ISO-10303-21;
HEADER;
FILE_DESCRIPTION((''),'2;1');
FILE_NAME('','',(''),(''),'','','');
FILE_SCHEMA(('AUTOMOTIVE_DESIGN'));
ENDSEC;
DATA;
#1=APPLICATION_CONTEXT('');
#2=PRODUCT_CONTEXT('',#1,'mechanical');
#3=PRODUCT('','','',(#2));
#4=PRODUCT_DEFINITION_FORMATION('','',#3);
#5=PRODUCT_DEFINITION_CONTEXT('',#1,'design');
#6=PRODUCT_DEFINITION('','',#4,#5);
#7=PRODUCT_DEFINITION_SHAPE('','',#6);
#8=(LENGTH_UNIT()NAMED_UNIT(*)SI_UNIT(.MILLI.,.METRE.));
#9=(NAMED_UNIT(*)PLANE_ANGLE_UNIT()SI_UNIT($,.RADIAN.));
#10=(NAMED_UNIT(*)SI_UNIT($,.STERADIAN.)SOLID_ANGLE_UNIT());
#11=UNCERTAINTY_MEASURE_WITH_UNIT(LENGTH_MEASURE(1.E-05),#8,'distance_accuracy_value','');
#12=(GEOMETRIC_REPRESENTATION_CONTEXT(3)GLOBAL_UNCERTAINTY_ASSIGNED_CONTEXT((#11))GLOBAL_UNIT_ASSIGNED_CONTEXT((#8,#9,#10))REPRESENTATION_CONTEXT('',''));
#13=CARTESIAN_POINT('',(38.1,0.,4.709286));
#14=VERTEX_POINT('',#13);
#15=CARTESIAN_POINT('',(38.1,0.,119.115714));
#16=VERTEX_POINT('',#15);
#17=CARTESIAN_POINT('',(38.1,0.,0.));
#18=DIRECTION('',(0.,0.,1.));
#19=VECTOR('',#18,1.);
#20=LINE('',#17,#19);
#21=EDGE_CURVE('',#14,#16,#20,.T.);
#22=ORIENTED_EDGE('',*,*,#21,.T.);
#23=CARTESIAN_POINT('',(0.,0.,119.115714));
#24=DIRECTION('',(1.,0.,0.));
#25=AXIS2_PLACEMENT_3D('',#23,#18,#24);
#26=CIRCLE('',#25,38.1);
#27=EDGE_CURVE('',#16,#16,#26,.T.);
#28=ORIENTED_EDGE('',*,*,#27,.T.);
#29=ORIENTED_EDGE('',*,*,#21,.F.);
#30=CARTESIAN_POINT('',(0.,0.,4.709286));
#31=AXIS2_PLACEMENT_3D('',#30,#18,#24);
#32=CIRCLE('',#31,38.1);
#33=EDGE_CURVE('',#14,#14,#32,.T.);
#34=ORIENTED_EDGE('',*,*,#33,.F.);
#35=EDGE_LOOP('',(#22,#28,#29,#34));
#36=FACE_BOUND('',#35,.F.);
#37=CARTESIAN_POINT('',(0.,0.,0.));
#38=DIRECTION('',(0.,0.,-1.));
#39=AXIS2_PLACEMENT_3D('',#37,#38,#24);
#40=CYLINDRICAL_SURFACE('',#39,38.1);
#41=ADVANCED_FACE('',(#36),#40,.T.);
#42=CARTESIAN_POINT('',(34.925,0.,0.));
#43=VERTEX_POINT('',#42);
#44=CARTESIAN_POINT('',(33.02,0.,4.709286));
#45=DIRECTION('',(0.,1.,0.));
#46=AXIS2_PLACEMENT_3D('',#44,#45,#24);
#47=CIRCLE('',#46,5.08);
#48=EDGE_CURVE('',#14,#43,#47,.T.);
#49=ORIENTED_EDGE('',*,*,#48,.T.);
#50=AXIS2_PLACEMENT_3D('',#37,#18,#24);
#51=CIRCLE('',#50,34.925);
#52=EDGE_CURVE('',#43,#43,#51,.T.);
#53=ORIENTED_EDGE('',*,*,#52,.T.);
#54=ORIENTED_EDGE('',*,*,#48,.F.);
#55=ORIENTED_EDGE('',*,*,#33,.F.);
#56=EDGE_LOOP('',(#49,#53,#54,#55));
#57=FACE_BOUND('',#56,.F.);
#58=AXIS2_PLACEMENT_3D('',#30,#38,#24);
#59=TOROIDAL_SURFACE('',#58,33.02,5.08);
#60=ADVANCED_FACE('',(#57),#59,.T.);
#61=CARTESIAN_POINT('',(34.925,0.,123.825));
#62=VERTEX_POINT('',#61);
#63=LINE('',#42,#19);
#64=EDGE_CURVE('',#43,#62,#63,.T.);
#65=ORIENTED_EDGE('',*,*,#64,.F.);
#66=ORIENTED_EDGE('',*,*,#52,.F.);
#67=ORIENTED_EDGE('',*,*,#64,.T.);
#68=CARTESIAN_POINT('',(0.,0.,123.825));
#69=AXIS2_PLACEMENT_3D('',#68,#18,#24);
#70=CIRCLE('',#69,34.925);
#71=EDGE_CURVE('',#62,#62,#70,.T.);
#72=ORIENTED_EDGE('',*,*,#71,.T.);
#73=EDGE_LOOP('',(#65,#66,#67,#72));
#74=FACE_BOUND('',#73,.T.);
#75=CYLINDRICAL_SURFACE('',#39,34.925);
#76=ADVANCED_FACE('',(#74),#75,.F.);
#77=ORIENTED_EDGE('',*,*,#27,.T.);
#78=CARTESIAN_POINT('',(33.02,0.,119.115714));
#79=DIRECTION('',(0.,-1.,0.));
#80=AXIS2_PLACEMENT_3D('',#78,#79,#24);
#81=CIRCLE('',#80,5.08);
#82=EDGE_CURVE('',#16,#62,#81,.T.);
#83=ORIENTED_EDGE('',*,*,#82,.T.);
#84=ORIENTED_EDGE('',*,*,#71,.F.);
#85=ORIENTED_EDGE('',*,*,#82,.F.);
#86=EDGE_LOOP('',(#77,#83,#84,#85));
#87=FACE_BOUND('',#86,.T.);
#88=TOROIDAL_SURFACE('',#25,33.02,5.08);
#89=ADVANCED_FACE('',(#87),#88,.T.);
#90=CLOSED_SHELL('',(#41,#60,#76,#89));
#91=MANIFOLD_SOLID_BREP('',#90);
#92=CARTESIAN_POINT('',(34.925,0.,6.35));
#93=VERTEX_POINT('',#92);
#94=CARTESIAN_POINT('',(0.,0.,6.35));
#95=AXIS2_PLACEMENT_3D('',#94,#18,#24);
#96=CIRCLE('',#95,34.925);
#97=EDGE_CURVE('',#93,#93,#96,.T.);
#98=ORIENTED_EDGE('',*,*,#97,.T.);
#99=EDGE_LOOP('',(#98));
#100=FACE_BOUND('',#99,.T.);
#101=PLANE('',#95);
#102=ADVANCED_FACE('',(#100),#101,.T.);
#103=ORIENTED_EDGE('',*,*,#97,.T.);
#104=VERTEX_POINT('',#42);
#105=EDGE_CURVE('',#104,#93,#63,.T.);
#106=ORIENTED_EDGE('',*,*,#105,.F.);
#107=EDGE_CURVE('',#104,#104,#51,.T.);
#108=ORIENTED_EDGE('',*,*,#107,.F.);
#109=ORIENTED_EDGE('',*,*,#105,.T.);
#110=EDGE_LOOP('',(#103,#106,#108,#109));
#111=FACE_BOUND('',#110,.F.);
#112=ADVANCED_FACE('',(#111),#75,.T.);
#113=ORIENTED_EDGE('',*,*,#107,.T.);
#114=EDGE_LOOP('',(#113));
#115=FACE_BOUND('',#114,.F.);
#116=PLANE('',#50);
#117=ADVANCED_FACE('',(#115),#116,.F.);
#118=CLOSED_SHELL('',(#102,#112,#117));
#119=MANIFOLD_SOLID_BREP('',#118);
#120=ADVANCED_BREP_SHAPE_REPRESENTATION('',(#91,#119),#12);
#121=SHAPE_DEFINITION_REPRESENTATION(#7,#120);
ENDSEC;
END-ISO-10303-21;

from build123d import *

# Parameters (mm, degrees)
F0_R     = 38.1
F0_R_2   = 34.925
F1_DEPTH = 123.825
F2_DEPTH = 6.35


# Not quite as in the source:
# - a fillet or chamfer that OpenCascade refuses, or shapes differently, is made with other operations: its cross-section is extruded or revolved along the edge and cut away or added


with BuildPart() as f1:
    # F0 (on Top) → F1 (new body)
    with BuildSketch(Plane.XY):
        Circle(F0_R)
        Circle(F0_R_2, mode=Mode.SUBTRACT)
    extrude(amount=F1_DEPTH)

    # F3: fillet of radius 5.08 on 1 edges, made by hand

    # F3_s1 → F3_t2 (revolve, cut)
    with BuildSketch(Plane.XZ):
        with BuildLine():
            ThreePointArc((38.1, 119.1157139607), (37.2321134838, 121.9555202921), (34.925, 123.825))
            Line((34.925, 123.825), (38.1, 123.825))
            Line((38.1, 123.825), (38.1, 119.1157139607))
        make_face()
    revolve(axis=Axis((0, 0, 123.825), (0, 0, 1)), mode=Mode.SUBTRACT)

    # F4: fillet of radius 5.08 on 1 edges, made by hand

    # F4_s1 → F4_t2 (revolve, cut)
    with BuildSketch(Plane.XZ):
        with BuildLine():
            ThreePointArc((38.1, 4.7092860393), (37.2321134838, 1.8694797079), (34.925, 0))
            Line((34.925, 0), (38.1, 0))
            Line((38.1, 0), (38.1, 4.7092860393))
        make_face()
    revolve(axis=Axis((0, 0, 0), (0, 0, 1)), mode=Mode.SUBTRACT)


with BuildPart() as f2:
    # F0 (on Top) → F2 (new body)
    with BuildSketch(Plane.XY):
        Circle(F0_R_2)
    extrude(amount=F2_DEPTH)


solid = Compound([f1.part, f2.part])
